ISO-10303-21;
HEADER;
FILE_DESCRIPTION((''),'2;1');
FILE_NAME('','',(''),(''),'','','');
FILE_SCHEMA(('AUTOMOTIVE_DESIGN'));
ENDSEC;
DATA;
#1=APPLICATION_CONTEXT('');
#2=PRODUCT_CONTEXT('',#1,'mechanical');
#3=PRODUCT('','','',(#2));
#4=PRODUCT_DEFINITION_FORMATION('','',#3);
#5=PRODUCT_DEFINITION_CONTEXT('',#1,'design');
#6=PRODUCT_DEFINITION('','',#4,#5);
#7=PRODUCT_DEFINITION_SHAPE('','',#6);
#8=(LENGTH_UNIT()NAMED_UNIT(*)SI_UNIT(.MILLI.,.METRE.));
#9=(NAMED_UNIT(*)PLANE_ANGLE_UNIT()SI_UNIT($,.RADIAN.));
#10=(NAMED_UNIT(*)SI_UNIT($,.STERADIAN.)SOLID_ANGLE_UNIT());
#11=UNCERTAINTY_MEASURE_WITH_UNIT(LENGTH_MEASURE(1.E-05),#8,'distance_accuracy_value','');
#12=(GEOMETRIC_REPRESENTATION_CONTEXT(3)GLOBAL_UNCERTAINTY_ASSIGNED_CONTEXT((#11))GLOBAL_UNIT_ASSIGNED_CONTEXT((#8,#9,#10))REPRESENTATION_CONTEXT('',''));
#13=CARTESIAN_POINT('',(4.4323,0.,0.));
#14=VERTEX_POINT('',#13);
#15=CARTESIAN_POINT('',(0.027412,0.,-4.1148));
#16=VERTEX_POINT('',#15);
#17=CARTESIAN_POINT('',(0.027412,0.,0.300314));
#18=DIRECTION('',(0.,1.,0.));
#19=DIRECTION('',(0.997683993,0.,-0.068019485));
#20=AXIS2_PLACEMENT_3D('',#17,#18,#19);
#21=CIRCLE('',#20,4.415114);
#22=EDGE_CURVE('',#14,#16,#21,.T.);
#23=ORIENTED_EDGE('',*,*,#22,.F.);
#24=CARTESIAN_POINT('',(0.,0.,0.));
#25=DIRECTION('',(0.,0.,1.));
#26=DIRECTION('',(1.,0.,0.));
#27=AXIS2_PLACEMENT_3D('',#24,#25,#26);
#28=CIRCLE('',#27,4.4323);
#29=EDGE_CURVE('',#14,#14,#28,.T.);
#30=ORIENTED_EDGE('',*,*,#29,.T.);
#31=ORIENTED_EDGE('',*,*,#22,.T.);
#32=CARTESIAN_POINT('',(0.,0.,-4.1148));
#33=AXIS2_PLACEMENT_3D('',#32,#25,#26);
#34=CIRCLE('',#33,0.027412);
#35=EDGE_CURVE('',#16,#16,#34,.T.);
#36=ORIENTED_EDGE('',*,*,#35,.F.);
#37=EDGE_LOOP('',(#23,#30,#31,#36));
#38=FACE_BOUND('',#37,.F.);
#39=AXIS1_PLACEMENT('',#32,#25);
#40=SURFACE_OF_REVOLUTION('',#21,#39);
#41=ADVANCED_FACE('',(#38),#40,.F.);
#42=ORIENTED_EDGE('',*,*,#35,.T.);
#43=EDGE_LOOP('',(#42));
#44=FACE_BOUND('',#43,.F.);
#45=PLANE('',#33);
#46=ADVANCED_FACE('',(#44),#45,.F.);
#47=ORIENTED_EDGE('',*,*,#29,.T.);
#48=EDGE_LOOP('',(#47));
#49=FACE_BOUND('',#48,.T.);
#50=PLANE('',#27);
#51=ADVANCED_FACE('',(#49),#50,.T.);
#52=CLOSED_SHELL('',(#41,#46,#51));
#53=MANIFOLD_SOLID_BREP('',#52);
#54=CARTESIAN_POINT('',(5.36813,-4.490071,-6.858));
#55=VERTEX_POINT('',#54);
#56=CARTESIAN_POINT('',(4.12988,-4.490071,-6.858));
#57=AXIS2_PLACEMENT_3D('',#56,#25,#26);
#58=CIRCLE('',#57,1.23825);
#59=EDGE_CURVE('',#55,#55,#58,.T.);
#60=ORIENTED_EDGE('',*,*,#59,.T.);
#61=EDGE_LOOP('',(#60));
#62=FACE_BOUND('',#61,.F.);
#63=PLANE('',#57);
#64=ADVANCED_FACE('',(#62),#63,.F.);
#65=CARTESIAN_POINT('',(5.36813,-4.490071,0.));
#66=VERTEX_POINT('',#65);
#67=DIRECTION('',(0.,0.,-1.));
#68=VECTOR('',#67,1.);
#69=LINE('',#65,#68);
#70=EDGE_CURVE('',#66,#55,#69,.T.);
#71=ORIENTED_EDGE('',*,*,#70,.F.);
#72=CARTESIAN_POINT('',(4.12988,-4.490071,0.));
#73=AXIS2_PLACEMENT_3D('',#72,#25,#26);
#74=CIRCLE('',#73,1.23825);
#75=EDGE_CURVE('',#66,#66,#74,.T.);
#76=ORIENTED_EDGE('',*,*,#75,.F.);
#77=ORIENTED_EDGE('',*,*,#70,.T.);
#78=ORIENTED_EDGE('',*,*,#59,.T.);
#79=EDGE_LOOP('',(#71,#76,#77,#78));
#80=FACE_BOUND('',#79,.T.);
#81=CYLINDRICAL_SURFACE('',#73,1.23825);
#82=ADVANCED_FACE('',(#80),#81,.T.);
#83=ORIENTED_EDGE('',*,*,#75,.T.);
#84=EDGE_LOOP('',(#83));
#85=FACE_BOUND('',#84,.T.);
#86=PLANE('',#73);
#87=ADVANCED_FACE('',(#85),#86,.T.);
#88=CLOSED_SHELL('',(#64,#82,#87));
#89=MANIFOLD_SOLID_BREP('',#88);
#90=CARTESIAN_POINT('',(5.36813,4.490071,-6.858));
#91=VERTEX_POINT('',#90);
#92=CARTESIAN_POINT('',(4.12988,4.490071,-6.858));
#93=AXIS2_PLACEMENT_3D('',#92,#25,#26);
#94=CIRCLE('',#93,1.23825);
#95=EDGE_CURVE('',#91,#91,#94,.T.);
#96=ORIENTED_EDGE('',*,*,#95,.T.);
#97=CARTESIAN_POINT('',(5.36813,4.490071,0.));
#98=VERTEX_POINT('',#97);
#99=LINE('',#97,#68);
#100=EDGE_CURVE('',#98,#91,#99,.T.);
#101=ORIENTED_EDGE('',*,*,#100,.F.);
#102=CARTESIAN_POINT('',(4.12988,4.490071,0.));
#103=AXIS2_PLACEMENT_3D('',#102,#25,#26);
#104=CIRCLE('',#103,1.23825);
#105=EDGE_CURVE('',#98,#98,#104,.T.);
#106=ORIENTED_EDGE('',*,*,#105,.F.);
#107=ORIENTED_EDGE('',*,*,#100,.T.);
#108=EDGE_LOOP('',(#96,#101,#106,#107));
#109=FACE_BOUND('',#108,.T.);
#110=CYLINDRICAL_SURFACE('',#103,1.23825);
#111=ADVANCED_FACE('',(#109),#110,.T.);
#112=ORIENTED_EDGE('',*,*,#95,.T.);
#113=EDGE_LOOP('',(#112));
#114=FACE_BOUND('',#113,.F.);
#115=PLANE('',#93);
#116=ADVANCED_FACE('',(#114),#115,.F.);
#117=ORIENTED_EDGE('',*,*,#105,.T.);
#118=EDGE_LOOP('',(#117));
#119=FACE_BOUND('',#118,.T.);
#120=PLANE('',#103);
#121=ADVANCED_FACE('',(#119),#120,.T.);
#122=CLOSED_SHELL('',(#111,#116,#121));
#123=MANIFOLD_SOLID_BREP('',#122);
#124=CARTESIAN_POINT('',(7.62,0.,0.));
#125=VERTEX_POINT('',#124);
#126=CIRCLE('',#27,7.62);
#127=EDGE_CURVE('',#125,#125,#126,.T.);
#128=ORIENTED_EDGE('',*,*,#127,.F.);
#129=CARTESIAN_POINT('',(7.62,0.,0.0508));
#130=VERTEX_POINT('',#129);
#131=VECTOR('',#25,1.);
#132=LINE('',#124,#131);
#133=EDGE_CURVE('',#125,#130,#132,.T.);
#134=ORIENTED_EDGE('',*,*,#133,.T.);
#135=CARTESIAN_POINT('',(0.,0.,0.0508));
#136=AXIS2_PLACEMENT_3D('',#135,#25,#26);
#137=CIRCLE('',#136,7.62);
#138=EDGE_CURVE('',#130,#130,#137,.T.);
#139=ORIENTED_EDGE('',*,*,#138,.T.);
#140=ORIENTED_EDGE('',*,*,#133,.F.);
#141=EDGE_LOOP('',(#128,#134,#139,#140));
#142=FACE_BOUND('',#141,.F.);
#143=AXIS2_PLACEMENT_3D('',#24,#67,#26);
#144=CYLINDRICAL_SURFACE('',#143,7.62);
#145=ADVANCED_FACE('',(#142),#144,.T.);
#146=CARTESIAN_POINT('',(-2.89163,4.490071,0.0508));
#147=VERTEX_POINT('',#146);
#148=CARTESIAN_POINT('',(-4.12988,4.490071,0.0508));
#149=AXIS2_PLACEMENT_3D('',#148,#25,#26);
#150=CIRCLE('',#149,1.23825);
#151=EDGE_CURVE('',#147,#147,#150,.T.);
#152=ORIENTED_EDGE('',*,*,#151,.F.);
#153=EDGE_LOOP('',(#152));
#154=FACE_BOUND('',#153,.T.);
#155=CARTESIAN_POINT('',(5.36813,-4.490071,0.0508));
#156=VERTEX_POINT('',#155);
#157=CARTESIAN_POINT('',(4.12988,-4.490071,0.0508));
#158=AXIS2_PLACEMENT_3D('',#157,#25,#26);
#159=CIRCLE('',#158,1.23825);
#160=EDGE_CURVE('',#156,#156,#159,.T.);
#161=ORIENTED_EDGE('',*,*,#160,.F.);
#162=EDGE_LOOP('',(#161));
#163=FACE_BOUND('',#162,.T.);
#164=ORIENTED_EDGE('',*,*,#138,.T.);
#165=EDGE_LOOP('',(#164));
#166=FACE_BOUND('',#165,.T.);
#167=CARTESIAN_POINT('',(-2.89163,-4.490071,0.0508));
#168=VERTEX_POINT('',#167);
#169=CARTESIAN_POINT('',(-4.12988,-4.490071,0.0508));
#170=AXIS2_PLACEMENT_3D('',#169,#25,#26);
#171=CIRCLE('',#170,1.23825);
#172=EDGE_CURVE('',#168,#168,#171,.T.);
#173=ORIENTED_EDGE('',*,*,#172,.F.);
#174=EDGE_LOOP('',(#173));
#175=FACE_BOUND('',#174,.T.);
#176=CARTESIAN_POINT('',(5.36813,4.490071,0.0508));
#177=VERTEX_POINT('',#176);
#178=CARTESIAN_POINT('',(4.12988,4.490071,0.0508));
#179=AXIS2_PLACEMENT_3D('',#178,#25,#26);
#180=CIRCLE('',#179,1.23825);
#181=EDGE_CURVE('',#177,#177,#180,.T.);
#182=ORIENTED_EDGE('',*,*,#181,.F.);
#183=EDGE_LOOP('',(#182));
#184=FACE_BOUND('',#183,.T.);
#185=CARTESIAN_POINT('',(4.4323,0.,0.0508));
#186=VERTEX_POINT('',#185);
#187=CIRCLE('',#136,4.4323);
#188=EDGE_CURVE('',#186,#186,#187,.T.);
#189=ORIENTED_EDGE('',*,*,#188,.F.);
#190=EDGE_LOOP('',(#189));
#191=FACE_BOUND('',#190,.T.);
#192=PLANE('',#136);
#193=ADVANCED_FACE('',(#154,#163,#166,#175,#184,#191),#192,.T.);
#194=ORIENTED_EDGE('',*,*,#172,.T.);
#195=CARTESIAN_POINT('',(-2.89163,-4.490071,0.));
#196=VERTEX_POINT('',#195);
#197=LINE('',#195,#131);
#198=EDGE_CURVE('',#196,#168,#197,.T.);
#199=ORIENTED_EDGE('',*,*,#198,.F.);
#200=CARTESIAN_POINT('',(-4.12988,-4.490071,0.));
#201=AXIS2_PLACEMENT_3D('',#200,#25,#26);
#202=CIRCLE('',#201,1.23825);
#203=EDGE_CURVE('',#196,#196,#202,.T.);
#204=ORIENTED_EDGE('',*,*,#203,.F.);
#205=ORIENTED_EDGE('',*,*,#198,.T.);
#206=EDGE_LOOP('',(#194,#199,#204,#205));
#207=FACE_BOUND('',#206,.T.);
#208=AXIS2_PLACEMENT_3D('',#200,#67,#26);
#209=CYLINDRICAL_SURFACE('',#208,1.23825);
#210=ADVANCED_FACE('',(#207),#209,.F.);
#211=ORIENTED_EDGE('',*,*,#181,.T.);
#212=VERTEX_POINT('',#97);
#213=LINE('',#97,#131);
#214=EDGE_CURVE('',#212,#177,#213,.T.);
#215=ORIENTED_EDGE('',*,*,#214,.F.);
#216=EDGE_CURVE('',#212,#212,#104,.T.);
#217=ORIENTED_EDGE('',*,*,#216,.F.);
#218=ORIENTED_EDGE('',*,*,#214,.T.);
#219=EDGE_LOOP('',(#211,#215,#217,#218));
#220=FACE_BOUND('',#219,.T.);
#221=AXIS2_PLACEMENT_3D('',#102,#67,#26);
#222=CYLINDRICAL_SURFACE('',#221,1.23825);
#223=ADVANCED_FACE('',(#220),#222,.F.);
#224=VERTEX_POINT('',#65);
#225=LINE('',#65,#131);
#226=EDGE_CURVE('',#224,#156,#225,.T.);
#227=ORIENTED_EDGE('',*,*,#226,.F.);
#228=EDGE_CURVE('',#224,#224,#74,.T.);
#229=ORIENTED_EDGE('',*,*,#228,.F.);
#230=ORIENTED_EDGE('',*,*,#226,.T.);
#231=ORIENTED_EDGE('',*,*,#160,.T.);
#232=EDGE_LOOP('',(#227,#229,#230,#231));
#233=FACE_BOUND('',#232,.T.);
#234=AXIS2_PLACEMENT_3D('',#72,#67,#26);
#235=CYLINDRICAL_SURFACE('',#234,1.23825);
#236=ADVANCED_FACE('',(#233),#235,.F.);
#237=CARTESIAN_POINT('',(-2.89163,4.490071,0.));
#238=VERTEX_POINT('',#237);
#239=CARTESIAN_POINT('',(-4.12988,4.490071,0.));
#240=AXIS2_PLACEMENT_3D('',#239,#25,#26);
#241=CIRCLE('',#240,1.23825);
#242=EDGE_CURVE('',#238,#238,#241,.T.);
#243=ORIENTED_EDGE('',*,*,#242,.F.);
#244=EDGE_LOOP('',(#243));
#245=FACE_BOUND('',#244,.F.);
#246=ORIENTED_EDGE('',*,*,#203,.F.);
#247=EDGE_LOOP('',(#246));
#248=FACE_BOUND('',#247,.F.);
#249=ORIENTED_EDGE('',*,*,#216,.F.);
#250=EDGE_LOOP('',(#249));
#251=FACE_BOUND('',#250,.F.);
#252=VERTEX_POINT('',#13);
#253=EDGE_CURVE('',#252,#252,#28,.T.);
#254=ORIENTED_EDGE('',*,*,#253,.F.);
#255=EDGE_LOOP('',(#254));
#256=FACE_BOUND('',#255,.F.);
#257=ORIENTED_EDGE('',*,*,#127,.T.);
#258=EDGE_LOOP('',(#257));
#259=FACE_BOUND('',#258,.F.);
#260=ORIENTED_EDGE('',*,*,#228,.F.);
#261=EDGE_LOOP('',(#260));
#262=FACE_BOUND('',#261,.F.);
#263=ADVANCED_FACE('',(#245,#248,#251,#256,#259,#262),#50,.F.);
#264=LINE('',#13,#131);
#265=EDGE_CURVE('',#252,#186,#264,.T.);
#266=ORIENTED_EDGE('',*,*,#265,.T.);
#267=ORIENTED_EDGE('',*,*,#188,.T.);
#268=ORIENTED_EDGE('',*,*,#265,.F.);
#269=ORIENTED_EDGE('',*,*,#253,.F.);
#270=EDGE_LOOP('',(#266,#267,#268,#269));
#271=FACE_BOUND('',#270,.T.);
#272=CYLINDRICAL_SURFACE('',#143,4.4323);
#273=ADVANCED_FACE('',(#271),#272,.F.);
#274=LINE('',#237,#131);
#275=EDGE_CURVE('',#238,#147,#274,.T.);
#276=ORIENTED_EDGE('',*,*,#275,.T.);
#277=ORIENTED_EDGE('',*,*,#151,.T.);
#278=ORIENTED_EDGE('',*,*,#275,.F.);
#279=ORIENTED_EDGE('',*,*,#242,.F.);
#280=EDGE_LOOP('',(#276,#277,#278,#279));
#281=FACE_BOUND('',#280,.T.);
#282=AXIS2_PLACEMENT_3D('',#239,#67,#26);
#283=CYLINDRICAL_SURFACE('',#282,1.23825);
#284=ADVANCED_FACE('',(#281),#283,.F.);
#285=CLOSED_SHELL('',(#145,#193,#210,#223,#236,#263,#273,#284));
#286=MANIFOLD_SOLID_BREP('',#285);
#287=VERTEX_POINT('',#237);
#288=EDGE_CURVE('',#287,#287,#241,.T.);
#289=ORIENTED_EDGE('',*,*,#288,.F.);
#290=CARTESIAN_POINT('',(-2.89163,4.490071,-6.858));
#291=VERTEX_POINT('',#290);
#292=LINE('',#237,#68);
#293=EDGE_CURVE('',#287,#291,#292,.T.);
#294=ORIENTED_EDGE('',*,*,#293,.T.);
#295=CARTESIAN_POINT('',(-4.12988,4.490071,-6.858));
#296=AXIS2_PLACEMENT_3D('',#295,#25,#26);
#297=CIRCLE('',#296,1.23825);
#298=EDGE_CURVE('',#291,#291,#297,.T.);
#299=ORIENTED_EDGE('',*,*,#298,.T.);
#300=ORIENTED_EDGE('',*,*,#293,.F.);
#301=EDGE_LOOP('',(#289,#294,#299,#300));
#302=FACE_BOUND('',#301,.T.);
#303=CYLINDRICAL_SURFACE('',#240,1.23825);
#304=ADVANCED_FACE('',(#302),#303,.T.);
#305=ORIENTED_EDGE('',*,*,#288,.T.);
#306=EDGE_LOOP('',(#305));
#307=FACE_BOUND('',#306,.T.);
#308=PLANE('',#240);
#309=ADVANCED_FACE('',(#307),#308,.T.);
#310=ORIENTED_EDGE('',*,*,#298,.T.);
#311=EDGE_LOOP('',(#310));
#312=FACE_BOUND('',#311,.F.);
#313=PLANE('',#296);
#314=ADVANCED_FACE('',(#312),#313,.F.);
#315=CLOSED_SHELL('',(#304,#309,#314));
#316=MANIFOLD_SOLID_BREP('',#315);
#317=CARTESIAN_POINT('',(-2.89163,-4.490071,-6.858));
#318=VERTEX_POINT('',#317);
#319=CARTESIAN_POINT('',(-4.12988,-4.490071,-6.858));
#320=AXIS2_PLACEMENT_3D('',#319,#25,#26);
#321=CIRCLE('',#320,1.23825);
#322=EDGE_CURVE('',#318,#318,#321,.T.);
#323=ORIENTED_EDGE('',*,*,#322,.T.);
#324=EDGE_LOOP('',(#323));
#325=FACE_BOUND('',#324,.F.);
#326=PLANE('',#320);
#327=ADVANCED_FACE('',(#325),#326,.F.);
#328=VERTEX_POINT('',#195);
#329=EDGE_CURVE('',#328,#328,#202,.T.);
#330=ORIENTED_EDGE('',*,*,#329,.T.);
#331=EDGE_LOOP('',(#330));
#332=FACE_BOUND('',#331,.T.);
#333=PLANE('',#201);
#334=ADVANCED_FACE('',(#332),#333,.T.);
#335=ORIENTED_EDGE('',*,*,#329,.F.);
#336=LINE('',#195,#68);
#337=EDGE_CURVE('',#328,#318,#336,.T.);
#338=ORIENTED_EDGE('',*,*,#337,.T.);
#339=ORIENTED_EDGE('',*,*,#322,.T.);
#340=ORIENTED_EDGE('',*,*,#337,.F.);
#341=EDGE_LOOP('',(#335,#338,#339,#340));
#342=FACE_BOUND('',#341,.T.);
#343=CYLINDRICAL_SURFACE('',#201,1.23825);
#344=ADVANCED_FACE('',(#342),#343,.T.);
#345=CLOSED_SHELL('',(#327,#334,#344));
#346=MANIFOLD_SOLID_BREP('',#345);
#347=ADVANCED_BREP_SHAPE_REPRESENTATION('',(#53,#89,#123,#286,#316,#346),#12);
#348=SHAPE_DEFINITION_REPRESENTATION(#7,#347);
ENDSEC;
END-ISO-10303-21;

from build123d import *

# Parameters (mm, degrees)
F0_R     = 1.23825
F1_DEPTH = 6.858
F0_R_2   = 4.4323
F2_DEPTH = 4.1148
F0_R_3   = 7.62
F4_DEPTH = 0.0508


# Not quite as in the source:
# - a fillet or chamfer that OpenCascade refuses, or shapes differently, is made with other operations: its cross-section is extruded or revolved along the edge and cut away or added


with BuildPart() as f1:
    # F0 (on Top) → F1 (new body)
    with BuildSketch(Plane.XY):
        with Locations((-4.1298802341, 4.4900714386)):
            Circle(F0_R)
    extrude(amount=-F1_DEPTH)


with BuildPart() as f1b:
    # F0 (on Top) → F1, piece 2 (new body)
    with BuildSketch(Plane.XY):
        with Locations((-4.1298802341, -4.4900714386)):
            Circle(F0_R)
    extrude(amount=-F1_DEPTH)


with BuildPart() as f1c:
    # F0 (on Top) → F1, piece 3 (new body)
    with BuildSketch(Plane.XY):
        with Locations((4.1298802341, -4.4900714386)):
            Circle(F0_R)
    extrude(amount=-F1_DEPTH)


with BuildPart() as f1d:
    # F0 (on Top) → F1, piece 4 (new body)
    with BuildSketch(Plane.XY):
        with Locations((4.1298802341, 4.4900714386)):
            Circle(F0_R)
    extrude(amount=-F1_DEPTH)


with BuildPart() as f2:
    # F0 (on Top) → F2 (new body)
    with BuildSketch(Plane.XY):
        Circle(F0_R_2)
    extrude(amount=-F2_DEPTH)

    # F3: fillet of radius 4.4151137629 on 1 edges, made by hand

    # F3_s1 → F3_t2 (revolve, cut)
    with BuildSketch(Plane.XZ):
        with BuildLine():
            ThreePointArc((4.4323, 0), (3.041321932, -2.9260734556), (0.0274116719, -4.1148))
            Line((0.0274116719, -4.1148), (4.4323, -4.1148))
            Line((4.4323, -4.1148), (4.4323, 0))
        make_face()
    revolve(axis=Axis((0, 0, -4.1148), (0, 0, 1)), mode=Mode.SUBTRACT)


with BuildPart() as f4:
    # F0 (on Top) → F4 (new body)
    with BuildSketch(Plane.XY):
        Circle(F0_R_3)
        with Locations((-4.1298802341, -4.4900714386)):
            Circle(F0_R, mode=Mode.SUBTRACT)
        with Locations((4.1298802341, -4.4900714386)):
            Circle(F0_R, mode=Mode.SUBTRACT)
        with Locations((-4.1298802341, 4.4900714386)):
            Circle(F0_R, mode=Mode.SUBTRACT)
        Circle(F0_R_2, mode=Mode.SUBTRACT)
        with Locations((4.1298802341, 4.4900714386)):
            Circle(F0_R, mode=Mode.SUBTRACT)
    extrude(amount=F4_DEPTH)


solid = Compound([f1.part, f1b.part, f1c.part, f1d.part, f2.part, f4.part])
